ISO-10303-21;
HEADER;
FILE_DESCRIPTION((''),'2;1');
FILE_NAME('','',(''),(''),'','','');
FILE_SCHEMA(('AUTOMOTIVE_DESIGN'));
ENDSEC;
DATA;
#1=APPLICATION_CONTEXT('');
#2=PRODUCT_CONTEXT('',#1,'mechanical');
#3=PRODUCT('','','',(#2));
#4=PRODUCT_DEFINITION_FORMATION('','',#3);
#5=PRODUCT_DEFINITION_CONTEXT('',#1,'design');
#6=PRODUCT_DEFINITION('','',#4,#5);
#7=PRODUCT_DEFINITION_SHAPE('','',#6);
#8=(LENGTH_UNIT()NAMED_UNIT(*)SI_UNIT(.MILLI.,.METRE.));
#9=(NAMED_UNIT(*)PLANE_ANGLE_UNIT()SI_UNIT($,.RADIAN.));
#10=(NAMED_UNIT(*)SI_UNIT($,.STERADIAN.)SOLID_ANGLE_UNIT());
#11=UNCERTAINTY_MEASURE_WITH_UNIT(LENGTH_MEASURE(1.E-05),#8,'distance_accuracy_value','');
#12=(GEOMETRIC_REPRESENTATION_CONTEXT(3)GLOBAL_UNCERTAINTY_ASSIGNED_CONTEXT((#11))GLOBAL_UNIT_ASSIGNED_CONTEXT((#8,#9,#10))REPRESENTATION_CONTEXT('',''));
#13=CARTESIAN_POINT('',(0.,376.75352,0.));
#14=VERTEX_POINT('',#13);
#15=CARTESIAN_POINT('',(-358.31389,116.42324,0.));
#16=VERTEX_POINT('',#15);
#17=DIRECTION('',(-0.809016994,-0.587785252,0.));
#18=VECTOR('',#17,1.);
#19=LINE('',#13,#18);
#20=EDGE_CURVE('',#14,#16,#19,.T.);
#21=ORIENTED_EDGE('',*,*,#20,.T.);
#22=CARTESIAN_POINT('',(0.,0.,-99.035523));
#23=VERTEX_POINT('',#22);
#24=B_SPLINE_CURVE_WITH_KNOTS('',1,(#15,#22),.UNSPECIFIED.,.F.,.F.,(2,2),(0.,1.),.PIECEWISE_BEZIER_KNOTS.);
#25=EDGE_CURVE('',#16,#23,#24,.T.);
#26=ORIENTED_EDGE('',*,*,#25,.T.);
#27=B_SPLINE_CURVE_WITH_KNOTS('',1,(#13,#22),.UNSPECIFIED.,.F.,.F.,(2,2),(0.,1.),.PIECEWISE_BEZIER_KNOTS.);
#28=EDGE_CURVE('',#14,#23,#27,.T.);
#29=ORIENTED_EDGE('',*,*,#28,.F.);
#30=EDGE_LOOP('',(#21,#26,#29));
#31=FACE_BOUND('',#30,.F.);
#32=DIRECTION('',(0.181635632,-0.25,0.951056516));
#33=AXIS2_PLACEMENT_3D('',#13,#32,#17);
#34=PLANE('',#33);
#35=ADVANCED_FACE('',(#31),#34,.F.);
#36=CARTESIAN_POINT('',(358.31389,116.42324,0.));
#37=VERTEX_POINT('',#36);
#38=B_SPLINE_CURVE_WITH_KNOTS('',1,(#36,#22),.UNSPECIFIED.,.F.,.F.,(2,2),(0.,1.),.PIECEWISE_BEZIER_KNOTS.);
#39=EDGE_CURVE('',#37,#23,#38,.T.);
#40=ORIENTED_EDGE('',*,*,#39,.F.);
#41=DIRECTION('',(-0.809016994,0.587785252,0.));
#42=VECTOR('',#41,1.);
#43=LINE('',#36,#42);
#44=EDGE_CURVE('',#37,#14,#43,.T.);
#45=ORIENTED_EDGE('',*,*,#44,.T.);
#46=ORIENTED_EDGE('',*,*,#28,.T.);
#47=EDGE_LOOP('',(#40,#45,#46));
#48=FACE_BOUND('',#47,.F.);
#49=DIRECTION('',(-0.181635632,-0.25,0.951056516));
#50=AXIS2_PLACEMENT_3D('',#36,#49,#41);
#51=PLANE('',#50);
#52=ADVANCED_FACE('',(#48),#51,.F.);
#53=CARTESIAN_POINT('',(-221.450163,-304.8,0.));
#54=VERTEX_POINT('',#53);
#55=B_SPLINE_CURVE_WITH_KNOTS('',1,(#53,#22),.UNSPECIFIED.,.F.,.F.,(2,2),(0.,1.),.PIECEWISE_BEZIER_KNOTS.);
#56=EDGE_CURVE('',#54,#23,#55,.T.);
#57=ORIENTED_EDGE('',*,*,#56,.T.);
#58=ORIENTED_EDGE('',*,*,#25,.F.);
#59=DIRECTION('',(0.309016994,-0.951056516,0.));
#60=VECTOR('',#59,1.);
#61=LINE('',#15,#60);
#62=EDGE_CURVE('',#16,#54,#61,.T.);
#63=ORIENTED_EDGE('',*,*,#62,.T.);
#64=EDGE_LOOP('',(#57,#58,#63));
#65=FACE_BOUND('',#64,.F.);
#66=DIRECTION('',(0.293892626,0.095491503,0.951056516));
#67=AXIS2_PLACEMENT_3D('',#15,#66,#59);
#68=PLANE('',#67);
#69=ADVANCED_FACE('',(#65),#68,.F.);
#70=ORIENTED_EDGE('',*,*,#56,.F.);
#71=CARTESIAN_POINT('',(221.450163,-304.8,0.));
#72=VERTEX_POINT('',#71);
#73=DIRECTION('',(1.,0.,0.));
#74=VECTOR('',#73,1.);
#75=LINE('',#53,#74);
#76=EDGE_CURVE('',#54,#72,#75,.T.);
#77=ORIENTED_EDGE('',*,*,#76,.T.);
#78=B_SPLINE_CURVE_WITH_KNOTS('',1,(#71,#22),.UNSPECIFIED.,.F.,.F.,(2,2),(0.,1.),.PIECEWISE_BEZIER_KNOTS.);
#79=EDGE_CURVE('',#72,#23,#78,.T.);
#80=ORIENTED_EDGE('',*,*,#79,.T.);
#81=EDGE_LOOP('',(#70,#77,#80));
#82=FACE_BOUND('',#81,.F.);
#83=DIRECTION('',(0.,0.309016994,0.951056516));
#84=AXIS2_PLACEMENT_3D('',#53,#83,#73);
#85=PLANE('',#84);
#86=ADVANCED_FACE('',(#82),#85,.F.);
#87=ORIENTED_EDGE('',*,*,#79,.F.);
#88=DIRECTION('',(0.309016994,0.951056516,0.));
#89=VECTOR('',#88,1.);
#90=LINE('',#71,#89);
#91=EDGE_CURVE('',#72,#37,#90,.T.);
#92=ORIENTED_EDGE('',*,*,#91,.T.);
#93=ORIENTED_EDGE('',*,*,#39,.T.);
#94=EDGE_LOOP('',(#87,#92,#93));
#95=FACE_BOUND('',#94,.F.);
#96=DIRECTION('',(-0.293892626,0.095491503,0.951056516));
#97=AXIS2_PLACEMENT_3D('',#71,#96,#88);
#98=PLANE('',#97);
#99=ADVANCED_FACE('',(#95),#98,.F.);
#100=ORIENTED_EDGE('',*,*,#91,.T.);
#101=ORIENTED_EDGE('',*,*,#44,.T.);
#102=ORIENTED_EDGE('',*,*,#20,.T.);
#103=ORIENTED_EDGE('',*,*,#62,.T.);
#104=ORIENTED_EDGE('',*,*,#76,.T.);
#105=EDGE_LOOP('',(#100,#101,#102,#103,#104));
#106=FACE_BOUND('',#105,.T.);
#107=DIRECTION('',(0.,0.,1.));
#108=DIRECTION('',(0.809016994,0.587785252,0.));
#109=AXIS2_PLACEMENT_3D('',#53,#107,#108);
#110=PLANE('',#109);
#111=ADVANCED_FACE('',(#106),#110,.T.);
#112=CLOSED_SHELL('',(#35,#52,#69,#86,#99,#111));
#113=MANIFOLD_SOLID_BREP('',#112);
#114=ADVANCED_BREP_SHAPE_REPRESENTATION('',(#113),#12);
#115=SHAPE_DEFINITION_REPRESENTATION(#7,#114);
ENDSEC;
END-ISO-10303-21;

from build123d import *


# Not quite as in the source:
# - an extrude whose draft closes it to a point is written as a loft to that point


with BuildPart() as f1:
    # F0 (on Top) → F1 section 0
    with BuildSketch(Plane.XY, mode=Mode.PRIVATE) as f1_s0:
        Polygon((-221.450162536, -304.8), (221.450162536, -304.8), (358.3138897975, 116.423240229), (0, 376.7535195419), (-358.3138897975, 116.423240229), align=None)
    loft([f1_s0.sketch, Vertex(0, 0, -99.0355234118)], ruled=True)


solid = f1.part
